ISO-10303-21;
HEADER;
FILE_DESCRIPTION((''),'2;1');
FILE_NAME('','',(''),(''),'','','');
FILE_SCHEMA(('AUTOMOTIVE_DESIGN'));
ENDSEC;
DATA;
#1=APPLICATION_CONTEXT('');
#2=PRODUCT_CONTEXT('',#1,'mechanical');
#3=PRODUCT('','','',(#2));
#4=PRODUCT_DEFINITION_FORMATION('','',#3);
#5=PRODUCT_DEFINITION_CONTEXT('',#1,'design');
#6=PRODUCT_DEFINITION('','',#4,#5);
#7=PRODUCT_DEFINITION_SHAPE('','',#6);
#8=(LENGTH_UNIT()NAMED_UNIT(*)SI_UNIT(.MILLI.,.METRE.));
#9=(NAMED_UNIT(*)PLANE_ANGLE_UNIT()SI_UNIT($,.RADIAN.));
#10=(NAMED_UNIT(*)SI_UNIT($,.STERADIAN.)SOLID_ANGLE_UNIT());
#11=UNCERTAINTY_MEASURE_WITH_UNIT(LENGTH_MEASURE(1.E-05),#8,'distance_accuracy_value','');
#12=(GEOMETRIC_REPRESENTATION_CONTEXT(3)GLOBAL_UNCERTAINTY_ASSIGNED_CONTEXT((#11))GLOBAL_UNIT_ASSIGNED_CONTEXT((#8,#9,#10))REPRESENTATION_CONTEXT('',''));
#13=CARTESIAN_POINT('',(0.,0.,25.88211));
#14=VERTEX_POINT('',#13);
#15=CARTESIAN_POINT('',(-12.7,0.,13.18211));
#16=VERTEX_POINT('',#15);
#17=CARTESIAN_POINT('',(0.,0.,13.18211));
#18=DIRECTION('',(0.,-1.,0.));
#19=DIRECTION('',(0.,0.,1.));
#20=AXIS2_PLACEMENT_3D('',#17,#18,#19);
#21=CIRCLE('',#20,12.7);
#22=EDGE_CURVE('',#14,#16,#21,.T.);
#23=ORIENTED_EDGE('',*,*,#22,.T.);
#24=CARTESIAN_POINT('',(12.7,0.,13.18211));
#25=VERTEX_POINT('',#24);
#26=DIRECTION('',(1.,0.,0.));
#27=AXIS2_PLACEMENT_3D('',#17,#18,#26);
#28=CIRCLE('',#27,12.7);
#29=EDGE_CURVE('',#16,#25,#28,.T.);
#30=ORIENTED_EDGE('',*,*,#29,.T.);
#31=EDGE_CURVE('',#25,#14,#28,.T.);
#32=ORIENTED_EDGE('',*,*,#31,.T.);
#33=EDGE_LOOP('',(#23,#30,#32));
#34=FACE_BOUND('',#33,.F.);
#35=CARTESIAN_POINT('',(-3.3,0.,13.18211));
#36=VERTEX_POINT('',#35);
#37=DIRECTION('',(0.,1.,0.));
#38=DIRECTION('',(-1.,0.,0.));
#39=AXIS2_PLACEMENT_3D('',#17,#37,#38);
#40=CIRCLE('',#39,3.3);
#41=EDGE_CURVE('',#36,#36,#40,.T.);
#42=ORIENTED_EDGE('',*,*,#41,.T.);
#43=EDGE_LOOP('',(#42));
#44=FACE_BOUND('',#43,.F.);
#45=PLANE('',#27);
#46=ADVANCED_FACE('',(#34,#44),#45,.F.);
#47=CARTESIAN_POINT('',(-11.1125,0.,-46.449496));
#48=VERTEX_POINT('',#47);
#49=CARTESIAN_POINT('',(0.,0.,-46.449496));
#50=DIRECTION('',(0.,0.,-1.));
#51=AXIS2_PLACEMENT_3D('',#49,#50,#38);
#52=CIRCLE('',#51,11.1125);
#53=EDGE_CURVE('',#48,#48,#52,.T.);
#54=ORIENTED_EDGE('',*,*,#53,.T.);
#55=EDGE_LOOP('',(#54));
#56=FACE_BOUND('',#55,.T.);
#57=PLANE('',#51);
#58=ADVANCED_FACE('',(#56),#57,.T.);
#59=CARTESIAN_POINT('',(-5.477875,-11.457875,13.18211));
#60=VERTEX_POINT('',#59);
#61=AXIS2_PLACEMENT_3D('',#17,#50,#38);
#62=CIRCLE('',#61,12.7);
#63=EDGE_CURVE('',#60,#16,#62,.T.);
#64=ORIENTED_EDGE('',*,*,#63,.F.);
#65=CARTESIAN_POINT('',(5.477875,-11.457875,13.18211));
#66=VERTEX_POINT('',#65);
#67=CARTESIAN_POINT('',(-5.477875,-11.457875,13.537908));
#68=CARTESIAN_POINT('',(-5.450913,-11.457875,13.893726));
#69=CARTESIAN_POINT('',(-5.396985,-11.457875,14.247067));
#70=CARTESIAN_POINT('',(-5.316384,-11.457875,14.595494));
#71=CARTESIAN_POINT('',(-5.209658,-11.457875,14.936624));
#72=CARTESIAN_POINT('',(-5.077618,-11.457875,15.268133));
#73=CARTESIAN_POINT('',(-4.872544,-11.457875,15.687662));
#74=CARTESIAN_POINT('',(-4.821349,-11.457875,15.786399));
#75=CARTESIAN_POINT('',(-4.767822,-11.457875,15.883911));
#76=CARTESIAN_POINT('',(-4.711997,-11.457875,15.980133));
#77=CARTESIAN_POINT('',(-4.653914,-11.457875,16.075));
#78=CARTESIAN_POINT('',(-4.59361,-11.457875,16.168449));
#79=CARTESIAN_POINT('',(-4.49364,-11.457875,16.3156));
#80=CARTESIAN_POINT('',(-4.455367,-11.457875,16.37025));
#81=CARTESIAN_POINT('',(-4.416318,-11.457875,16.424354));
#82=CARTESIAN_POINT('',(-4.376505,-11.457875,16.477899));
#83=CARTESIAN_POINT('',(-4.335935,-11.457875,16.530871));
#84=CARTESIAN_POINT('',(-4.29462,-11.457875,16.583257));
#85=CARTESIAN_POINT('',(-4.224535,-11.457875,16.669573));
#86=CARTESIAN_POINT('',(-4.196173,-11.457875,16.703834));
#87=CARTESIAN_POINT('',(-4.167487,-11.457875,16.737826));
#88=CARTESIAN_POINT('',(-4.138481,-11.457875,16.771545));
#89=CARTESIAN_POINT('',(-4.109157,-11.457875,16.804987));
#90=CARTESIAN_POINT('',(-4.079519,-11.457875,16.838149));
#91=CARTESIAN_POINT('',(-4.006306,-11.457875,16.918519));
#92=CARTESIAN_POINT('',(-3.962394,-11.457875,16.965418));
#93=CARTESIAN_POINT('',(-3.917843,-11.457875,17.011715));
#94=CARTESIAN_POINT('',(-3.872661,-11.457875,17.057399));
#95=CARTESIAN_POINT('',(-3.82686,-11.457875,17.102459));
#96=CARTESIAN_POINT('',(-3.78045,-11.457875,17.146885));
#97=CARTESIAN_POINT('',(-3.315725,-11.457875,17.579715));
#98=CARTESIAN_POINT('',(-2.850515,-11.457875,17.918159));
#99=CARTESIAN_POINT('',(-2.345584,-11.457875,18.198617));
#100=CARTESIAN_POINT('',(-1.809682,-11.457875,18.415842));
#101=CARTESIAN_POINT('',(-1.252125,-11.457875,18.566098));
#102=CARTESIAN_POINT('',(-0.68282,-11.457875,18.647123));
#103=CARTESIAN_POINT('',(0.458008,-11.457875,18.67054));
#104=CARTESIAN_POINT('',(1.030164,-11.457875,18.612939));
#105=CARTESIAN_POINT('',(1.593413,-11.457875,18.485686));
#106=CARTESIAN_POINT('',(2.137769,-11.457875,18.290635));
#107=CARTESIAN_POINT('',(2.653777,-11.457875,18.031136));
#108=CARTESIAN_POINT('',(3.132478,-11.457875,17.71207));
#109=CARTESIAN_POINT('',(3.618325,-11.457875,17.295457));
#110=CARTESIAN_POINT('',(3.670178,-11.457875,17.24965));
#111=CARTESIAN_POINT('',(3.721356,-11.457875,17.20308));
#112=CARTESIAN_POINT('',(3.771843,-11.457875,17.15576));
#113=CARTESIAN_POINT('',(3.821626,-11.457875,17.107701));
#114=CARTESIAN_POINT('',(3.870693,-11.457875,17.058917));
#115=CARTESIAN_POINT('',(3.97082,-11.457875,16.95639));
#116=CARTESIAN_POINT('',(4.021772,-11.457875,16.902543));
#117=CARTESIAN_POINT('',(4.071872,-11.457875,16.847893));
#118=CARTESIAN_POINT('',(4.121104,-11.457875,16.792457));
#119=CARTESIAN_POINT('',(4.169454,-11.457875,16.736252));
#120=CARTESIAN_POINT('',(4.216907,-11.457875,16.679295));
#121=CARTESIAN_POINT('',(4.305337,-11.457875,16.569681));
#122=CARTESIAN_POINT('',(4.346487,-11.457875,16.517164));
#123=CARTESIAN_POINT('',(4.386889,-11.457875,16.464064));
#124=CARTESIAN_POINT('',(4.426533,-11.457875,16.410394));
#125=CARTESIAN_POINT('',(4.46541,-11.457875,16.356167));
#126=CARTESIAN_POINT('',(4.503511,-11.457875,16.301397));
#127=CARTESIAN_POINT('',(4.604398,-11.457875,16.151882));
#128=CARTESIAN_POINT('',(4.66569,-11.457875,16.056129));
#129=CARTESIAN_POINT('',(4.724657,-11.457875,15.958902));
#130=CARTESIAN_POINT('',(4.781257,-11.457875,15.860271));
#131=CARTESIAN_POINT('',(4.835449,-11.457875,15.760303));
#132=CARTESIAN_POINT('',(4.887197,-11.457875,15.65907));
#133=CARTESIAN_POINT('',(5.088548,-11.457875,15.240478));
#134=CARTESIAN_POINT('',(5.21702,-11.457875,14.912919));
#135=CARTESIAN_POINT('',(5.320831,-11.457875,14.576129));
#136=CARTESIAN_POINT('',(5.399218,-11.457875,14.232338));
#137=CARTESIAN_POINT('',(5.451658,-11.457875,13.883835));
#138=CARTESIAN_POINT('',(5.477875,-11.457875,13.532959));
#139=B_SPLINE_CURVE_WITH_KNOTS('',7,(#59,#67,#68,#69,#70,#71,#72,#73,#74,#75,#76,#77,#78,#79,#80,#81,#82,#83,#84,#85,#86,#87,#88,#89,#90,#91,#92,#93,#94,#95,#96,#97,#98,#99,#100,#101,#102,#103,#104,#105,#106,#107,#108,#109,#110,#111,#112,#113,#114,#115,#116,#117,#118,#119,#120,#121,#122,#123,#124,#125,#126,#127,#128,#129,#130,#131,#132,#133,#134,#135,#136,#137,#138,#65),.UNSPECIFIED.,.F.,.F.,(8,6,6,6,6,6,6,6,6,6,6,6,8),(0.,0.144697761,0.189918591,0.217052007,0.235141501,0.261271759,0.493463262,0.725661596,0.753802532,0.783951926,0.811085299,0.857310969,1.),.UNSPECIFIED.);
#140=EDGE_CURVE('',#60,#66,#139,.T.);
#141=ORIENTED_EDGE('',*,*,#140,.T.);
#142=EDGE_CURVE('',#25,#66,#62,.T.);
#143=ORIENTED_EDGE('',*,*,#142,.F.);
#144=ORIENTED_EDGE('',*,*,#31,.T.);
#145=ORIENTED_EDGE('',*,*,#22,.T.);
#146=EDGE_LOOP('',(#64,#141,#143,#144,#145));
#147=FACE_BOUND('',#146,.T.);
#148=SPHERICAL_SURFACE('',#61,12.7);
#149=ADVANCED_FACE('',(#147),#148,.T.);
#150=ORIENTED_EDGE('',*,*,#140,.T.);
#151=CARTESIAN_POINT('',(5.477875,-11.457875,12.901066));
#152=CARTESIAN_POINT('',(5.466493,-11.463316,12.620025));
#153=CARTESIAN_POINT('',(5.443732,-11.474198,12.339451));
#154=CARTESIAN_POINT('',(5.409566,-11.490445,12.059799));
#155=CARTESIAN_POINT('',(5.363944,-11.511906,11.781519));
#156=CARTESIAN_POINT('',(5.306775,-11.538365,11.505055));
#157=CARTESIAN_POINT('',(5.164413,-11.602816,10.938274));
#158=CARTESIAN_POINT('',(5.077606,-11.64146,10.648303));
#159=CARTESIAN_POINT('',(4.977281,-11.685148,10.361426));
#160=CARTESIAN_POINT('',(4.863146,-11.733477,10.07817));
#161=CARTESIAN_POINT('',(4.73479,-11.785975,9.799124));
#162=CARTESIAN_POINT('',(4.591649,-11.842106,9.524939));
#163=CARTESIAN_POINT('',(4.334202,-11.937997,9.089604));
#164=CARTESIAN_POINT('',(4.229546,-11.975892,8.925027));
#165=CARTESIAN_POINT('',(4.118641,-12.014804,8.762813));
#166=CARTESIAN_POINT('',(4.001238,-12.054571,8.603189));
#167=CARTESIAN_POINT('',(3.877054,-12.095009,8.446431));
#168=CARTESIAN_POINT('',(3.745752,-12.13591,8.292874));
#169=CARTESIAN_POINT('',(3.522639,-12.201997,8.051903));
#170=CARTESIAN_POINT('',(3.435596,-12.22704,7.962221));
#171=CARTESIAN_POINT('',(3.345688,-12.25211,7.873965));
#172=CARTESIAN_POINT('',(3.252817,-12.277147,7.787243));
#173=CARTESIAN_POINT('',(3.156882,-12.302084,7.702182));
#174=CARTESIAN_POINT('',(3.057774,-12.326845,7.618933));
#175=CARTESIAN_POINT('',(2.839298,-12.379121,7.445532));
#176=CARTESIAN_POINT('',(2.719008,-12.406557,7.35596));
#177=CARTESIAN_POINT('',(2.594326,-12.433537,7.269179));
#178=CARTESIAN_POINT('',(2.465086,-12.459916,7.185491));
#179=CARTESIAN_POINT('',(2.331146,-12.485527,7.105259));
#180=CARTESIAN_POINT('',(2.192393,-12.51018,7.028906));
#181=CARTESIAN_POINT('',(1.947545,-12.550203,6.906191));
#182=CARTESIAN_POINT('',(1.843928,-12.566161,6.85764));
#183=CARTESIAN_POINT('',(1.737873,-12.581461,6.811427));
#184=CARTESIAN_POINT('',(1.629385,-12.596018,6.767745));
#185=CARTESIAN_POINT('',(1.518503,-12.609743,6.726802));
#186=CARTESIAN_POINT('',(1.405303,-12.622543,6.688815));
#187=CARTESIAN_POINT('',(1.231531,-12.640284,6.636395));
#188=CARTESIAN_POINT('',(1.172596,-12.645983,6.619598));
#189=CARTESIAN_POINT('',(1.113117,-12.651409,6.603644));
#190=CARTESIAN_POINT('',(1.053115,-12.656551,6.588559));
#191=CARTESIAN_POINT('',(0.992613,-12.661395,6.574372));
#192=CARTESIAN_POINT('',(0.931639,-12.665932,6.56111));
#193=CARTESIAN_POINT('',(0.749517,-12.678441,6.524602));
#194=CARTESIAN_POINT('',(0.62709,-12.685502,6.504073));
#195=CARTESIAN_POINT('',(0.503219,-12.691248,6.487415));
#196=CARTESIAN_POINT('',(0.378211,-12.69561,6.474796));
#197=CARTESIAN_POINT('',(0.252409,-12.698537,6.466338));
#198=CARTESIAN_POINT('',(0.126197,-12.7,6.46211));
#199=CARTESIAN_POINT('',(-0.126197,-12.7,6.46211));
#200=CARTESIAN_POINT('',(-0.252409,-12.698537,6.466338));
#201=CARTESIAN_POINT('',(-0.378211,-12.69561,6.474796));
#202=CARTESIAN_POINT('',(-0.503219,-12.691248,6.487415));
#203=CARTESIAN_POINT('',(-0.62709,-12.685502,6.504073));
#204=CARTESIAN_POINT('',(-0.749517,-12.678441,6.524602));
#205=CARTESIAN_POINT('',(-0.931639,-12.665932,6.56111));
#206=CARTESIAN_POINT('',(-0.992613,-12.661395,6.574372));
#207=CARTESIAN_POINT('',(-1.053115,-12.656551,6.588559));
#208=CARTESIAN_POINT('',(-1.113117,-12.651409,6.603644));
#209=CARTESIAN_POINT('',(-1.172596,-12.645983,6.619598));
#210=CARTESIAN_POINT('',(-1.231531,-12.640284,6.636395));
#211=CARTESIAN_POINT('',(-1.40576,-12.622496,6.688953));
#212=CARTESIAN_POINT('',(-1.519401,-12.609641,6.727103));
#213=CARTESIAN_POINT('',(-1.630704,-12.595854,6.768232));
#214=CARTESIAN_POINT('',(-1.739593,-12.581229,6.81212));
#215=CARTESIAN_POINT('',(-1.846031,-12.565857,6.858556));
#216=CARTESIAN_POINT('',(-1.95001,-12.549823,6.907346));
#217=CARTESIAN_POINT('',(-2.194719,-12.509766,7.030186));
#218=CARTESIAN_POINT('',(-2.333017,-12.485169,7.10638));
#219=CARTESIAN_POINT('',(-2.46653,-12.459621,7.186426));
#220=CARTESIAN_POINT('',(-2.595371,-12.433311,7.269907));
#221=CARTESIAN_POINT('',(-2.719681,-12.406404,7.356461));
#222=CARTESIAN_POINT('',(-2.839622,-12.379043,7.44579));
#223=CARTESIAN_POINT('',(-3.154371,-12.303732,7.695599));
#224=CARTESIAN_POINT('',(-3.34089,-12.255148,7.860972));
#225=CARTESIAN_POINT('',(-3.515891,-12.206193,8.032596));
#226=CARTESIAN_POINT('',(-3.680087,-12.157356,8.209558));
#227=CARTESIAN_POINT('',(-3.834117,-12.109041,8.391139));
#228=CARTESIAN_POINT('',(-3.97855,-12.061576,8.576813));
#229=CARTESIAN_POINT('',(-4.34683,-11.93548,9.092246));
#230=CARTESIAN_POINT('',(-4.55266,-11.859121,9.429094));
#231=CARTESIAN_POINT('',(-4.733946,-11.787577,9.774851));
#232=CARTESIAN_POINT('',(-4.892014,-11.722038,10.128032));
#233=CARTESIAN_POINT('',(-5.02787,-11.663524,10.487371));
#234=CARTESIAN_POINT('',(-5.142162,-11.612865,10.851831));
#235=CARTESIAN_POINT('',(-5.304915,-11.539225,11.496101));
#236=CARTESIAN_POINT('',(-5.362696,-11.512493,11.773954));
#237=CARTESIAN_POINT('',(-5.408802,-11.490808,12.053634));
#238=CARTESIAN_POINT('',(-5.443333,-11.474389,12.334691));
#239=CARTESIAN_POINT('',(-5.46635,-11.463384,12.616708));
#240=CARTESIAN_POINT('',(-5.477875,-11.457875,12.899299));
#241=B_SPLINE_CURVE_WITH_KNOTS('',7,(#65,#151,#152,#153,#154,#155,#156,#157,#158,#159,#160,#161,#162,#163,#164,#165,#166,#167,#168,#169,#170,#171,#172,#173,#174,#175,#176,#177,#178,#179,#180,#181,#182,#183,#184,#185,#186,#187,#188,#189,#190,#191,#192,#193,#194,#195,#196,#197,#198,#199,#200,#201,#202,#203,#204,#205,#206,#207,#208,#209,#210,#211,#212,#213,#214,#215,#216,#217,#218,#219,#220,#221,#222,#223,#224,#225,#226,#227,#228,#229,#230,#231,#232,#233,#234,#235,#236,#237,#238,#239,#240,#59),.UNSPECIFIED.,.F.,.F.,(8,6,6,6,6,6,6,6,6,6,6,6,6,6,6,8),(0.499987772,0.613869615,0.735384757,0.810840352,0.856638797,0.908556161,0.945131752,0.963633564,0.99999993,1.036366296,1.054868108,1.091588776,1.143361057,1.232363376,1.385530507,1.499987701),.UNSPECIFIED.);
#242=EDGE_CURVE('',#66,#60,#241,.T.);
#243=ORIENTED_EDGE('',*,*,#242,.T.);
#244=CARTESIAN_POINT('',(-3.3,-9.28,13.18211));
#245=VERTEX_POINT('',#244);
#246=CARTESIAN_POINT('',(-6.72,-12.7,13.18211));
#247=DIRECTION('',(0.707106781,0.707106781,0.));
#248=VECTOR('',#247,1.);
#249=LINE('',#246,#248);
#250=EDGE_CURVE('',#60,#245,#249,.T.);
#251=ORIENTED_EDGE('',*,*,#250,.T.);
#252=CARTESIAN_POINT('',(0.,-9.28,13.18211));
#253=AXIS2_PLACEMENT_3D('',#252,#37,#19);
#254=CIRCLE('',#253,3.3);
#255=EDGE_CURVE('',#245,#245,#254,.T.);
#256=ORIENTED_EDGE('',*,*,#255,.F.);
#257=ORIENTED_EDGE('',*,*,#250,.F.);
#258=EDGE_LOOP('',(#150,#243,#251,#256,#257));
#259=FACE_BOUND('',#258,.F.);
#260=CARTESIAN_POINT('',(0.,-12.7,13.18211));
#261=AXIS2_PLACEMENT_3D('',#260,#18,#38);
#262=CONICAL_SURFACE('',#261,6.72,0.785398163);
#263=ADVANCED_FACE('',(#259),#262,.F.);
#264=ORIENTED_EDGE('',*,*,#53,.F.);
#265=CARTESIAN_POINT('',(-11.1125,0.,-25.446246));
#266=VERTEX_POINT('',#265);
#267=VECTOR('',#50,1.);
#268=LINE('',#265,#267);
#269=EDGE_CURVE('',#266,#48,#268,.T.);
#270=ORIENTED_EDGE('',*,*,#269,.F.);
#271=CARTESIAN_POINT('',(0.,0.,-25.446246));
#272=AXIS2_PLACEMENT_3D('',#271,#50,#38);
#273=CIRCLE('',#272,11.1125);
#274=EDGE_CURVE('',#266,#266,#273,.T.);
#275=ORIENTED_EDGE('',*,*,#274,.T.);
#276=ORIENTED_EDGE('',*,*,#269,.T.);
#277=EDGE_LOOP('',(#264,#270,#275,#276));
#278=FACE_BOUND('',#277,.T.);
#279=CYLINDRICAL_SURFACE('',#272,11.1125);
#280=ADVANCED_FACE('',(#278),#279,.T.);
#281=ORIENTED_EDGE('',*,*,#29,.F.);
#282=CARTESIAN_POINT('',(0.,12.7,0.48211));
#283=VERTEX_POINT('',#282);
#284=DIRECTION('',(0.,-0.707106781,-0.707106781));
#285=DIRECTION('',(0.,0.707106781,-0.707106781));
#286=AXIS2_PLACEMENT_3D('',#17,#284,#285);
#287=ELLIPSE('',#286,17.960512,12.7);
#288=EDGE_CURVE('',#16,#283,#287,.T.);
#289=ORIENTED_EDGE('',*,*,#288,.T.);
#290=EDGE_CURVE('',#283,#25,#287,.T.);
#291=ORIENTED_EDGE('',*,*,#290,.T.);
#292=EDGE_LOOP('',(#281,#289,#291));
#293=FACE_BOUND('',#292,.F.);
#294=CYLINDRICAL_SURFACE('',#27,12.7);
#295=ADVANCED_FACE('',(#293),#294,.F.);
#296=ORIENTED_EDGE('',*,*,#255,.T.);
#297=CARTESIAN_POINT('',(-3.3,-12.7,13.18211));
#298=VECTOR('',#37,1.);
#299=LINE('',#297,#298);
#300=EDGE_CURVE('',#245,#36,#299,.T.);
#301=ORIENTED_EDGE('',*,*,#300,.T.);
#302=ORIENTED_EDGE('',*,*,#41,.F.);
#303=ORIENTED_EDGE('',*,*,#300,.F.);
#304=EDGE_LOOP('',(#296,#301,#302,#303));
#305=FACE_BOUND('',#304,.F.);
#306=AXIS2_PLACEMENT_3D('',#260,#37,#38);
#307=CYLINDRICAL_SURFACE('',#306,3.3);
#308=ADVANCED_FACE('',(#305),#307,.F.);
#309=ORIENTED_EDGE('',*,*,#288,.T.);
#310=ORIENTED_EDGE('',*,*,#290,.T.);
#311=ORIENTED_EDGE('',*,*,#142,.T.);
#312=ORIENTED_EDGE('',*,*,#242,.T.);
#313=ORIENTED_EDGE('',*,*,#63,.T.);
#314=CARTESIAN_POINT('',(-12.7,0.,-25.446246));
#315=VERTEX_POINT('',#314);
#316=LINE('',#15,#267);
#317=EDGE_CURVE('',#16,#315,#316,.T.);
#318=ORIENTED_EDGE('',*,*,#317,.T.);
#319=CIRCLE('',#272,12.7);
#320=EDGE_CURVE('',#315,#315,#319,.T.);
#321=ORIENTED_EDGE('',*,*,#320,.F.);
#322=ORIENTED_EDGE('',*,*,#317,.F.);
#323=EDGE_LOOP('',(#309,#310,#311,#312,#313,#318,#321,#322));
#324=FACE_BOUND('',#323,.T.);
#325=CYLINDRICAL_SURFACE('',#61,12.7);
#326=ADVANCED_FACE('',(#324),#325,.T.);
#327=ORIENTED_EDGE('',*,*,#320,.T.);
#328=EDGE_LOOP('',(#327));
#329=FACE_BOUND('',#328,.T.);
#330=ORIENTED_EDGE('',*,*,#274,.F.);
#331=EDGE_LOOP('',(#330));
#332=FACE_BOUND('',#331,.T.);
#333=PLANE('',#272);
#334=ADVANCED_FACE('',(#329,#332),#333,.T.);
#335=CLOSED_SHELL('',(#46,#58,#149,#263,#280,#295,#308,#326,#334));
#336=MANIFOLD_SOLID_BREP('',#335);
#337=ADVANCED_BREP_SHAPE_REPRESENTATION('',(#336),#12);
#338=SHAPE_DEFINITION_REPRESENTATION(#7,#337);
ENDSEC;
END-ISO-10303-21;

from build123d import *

# Parameters (mm, degrees)
F2_R           = 12.7
F3_DEPTH       = 12.701
F6_D           = 6.6
F6_CSINK_D     = 13.44
F6_CSINK_ANGLE = 90


# Not quite as in the source:
# - a length typed as a fraction of an inch, garbled in the dataset ("3 / 203.2 mm" for 3/8 in), is restored


with BuildPart() as f1:
    # F0 (on Front) → F1 (revolve)
    with BuildSketch(Plane.XZ):
        with BuildLine():
            Line((0, -46.4494958016), (0, 25.8821103648))
            ThreePointArc((0, 25.8821103648), (-8.9802561211, 22.1623664858), (-12.7, 13.1821103648))
            Line((-12.7, 13.1821103648), (-12.7, -25.4462463191))
            Line((-12.7, -25.4462463191), (-11.1125, -25.4462463191))
            Line((-11.1125, -25.4462463191), (-11.1125, -46.4494958016))
            Line((-11.1125, -46.4494958016), (0, -46.4494958016))
        make_face()
    revolve(axis=Axis((0, 0, -7.9082977027), (0, 0, -1)))

    # F2 (on Front) → F3 (cut, through all)
    with BuildSketch(Plane.XZ):
        with Locations((0, 13.1821103648)):
            Circle(F2_R)
    extrude(amount=-F3_DEPTH, mode=Mode.SUBTRACT)

    # F6 (through all)
    with Locations(Plane.XZ.offset(12.7)):
        with Locations((0, 13.1821103648)):
            CounterSinkHole(F6_D / 2, F6_CSINK_D / 2, counter_sink_angle=F6_CSINK_ANGLE)


solid = f1.part
